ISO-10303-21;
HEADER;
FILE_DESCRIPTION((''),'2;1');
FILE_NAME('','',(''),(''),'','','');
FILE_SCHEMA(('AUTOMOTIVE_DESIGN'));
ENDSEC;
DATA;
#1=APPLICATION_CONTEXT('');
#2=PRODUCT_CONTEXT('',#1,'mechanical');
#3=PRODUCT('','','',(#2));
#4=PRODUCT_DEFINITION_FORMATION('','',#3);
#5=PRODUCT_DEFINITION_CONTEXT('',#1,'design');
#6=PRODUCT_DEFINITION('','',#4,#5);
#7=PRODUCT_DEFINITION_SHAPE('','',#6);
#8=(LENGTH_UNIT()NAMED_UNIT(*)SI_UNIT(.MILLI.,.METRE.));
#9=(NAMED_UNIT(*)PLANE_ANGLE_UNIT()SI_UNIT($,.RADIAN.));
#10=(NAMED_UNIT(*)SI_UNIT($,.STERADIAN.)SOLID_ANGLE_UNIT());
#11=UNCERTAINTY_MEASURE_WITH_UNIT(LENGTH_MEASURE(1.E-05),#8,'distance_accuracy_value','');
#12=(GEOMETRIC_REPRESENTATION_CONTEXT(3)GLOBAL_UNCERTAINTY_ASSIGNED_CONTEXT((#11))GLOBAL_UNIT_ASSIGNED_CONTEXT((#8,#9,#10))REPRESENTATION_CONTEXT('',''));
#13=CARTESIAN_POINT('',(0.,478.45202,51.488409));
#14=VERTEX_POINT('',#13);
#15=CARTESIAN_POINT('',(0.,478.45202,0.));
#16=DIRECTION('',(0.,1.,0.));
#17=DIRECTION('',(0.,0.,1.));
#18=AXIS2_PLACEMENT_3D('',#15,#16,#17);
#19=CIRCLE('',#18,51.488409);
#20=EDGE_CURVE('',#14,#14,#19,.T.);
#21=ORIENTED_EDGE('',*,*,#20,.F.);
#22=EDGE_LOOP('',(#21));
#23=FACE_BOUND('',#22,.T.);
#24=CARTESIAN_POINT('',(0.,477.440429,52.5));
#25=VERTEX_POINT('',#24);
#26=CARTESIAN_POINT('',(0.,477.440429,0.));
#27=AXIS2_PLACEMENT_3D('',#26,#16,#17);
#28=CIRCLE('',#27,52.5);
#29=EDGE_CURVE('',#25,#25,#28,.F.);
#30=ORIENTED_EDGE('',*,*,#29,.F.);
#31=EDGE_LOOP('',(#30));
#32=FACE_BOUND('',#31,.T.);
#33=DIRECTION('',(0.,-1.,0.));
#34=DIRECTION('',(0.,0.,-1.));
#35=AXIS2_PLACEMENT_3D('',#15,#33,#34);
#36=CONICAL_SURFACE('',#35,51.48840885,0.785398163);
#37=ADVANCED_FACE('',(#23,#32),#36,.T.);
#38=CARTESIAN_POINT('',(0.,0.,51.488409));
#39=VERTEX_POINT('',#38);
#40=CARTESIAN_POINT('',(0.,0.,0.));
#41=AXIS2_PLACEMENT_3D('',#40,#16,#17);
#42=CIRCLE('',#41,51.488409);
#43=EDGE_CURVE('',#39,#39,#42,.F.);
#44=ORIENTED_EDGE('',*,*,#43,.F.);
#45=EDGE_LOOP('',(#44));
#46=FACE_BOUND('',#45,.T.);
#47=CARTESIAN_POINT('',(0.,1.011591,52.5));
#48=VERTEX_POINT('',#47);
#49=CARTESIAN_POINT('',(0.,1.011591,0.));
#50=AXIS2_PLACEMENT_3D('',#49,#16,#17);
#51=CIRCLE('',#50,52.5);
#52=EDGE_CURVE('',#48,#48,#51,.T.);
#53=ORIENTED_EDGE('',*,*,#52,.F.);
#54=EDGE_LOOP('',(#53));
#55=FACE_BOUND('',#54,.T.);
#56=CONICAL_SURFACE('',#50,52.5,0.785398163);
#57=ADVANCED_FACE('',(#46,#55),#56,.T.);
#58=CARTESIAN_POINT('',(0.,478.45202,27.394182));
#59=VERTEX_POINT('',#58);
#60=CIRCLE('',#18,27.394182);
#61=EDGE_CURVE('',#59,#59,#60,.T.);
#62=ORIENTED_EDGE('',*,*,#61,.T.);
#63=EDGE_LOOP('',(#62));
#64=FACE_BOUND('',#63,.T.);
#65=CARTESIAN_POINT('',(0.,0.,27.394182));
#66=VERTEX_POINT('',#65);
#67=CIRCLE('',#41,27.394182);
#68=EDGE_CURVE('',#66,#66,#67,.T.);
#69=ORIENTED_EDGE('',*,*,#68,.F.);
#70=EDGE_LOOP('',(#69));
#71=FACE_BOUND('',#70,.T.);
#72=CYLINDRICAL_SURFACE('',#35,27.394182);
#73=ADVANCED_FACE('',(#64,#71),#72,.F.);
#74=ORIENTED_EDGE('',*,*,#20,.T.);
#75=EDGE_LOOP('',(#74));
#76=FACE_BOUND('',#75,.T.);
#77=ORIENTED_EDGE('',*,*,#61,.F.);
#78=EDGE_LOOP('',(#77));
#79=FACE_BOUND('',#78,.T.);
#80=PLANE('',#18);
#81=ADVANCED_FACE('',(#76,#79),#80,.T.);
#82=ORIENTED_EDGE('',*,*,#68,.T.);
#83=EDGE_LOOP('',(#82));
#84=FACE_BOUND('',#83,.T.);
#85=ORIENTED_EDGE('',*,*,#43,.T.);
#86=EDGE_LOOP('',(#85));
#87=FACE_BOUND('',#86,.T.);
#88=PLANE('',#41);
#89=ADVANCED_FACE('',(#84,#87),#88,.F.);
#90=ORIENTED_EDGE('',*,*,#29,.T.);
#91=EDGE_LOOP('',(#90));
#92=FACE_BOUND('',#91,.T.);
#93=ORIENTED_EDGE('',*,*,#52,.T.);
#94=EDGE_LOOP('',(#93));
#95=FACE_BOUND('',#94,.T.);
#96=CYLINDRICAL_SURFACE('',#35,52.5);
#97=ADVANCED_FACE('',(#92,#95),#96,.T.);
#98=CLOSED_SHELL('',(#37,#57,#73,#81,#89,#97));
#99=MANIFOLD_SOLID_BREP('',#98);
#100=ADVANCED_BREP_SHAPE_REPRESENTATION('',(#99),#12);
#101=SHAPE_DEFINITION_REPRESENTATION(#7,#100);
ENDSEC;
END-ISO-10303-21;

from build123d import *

# Parameters (mm, degrees)
SKETCH1_R           = 52.5
BOSS_EXTRUDE1_DEPTH = 478.452020078
SKETCH2_R           = 27.394182316
CUT_EXTRUDE1_DEPTH  = 485.178516166
CHAMFER1_SIZE       = 1.01159115


with BuildPart() as part:
    # Sketch1 → Boss-Extrude1 (new body)
    with BuildSketch(Plane(origin=(0, 0, 0), x_dir=(1, 0, 0), z_dir=(0, 1, 0))):
        Circle(SKETCH1_R)
    extrude(amount=BOSS_EXTRUDE1_DEPTH)

    # Sketch2 → Cut-Extrude1 (cut, through all)
    with BuildSketch(Plane(origin=(0, 0, 0), x_dir=(1, 0, 0), z_dir=(0, 1, 0))):
        Circle(SKETCH2_R)
    extrude(amount=CUT_EXTRUDE1_DEPTH, mode=Mode.SUBTRACT)

    # Chamfer1
    chamfer1_edges = [part.edges().sort_by_distance(p)[0] for p in [
        (-52.5, 478.452020078, 0),
        (-52.5, 0, 0),
    ]]
    chamfer(chamfer1_edges, length=CHAMFER1_SIZE)


solid = part.part
